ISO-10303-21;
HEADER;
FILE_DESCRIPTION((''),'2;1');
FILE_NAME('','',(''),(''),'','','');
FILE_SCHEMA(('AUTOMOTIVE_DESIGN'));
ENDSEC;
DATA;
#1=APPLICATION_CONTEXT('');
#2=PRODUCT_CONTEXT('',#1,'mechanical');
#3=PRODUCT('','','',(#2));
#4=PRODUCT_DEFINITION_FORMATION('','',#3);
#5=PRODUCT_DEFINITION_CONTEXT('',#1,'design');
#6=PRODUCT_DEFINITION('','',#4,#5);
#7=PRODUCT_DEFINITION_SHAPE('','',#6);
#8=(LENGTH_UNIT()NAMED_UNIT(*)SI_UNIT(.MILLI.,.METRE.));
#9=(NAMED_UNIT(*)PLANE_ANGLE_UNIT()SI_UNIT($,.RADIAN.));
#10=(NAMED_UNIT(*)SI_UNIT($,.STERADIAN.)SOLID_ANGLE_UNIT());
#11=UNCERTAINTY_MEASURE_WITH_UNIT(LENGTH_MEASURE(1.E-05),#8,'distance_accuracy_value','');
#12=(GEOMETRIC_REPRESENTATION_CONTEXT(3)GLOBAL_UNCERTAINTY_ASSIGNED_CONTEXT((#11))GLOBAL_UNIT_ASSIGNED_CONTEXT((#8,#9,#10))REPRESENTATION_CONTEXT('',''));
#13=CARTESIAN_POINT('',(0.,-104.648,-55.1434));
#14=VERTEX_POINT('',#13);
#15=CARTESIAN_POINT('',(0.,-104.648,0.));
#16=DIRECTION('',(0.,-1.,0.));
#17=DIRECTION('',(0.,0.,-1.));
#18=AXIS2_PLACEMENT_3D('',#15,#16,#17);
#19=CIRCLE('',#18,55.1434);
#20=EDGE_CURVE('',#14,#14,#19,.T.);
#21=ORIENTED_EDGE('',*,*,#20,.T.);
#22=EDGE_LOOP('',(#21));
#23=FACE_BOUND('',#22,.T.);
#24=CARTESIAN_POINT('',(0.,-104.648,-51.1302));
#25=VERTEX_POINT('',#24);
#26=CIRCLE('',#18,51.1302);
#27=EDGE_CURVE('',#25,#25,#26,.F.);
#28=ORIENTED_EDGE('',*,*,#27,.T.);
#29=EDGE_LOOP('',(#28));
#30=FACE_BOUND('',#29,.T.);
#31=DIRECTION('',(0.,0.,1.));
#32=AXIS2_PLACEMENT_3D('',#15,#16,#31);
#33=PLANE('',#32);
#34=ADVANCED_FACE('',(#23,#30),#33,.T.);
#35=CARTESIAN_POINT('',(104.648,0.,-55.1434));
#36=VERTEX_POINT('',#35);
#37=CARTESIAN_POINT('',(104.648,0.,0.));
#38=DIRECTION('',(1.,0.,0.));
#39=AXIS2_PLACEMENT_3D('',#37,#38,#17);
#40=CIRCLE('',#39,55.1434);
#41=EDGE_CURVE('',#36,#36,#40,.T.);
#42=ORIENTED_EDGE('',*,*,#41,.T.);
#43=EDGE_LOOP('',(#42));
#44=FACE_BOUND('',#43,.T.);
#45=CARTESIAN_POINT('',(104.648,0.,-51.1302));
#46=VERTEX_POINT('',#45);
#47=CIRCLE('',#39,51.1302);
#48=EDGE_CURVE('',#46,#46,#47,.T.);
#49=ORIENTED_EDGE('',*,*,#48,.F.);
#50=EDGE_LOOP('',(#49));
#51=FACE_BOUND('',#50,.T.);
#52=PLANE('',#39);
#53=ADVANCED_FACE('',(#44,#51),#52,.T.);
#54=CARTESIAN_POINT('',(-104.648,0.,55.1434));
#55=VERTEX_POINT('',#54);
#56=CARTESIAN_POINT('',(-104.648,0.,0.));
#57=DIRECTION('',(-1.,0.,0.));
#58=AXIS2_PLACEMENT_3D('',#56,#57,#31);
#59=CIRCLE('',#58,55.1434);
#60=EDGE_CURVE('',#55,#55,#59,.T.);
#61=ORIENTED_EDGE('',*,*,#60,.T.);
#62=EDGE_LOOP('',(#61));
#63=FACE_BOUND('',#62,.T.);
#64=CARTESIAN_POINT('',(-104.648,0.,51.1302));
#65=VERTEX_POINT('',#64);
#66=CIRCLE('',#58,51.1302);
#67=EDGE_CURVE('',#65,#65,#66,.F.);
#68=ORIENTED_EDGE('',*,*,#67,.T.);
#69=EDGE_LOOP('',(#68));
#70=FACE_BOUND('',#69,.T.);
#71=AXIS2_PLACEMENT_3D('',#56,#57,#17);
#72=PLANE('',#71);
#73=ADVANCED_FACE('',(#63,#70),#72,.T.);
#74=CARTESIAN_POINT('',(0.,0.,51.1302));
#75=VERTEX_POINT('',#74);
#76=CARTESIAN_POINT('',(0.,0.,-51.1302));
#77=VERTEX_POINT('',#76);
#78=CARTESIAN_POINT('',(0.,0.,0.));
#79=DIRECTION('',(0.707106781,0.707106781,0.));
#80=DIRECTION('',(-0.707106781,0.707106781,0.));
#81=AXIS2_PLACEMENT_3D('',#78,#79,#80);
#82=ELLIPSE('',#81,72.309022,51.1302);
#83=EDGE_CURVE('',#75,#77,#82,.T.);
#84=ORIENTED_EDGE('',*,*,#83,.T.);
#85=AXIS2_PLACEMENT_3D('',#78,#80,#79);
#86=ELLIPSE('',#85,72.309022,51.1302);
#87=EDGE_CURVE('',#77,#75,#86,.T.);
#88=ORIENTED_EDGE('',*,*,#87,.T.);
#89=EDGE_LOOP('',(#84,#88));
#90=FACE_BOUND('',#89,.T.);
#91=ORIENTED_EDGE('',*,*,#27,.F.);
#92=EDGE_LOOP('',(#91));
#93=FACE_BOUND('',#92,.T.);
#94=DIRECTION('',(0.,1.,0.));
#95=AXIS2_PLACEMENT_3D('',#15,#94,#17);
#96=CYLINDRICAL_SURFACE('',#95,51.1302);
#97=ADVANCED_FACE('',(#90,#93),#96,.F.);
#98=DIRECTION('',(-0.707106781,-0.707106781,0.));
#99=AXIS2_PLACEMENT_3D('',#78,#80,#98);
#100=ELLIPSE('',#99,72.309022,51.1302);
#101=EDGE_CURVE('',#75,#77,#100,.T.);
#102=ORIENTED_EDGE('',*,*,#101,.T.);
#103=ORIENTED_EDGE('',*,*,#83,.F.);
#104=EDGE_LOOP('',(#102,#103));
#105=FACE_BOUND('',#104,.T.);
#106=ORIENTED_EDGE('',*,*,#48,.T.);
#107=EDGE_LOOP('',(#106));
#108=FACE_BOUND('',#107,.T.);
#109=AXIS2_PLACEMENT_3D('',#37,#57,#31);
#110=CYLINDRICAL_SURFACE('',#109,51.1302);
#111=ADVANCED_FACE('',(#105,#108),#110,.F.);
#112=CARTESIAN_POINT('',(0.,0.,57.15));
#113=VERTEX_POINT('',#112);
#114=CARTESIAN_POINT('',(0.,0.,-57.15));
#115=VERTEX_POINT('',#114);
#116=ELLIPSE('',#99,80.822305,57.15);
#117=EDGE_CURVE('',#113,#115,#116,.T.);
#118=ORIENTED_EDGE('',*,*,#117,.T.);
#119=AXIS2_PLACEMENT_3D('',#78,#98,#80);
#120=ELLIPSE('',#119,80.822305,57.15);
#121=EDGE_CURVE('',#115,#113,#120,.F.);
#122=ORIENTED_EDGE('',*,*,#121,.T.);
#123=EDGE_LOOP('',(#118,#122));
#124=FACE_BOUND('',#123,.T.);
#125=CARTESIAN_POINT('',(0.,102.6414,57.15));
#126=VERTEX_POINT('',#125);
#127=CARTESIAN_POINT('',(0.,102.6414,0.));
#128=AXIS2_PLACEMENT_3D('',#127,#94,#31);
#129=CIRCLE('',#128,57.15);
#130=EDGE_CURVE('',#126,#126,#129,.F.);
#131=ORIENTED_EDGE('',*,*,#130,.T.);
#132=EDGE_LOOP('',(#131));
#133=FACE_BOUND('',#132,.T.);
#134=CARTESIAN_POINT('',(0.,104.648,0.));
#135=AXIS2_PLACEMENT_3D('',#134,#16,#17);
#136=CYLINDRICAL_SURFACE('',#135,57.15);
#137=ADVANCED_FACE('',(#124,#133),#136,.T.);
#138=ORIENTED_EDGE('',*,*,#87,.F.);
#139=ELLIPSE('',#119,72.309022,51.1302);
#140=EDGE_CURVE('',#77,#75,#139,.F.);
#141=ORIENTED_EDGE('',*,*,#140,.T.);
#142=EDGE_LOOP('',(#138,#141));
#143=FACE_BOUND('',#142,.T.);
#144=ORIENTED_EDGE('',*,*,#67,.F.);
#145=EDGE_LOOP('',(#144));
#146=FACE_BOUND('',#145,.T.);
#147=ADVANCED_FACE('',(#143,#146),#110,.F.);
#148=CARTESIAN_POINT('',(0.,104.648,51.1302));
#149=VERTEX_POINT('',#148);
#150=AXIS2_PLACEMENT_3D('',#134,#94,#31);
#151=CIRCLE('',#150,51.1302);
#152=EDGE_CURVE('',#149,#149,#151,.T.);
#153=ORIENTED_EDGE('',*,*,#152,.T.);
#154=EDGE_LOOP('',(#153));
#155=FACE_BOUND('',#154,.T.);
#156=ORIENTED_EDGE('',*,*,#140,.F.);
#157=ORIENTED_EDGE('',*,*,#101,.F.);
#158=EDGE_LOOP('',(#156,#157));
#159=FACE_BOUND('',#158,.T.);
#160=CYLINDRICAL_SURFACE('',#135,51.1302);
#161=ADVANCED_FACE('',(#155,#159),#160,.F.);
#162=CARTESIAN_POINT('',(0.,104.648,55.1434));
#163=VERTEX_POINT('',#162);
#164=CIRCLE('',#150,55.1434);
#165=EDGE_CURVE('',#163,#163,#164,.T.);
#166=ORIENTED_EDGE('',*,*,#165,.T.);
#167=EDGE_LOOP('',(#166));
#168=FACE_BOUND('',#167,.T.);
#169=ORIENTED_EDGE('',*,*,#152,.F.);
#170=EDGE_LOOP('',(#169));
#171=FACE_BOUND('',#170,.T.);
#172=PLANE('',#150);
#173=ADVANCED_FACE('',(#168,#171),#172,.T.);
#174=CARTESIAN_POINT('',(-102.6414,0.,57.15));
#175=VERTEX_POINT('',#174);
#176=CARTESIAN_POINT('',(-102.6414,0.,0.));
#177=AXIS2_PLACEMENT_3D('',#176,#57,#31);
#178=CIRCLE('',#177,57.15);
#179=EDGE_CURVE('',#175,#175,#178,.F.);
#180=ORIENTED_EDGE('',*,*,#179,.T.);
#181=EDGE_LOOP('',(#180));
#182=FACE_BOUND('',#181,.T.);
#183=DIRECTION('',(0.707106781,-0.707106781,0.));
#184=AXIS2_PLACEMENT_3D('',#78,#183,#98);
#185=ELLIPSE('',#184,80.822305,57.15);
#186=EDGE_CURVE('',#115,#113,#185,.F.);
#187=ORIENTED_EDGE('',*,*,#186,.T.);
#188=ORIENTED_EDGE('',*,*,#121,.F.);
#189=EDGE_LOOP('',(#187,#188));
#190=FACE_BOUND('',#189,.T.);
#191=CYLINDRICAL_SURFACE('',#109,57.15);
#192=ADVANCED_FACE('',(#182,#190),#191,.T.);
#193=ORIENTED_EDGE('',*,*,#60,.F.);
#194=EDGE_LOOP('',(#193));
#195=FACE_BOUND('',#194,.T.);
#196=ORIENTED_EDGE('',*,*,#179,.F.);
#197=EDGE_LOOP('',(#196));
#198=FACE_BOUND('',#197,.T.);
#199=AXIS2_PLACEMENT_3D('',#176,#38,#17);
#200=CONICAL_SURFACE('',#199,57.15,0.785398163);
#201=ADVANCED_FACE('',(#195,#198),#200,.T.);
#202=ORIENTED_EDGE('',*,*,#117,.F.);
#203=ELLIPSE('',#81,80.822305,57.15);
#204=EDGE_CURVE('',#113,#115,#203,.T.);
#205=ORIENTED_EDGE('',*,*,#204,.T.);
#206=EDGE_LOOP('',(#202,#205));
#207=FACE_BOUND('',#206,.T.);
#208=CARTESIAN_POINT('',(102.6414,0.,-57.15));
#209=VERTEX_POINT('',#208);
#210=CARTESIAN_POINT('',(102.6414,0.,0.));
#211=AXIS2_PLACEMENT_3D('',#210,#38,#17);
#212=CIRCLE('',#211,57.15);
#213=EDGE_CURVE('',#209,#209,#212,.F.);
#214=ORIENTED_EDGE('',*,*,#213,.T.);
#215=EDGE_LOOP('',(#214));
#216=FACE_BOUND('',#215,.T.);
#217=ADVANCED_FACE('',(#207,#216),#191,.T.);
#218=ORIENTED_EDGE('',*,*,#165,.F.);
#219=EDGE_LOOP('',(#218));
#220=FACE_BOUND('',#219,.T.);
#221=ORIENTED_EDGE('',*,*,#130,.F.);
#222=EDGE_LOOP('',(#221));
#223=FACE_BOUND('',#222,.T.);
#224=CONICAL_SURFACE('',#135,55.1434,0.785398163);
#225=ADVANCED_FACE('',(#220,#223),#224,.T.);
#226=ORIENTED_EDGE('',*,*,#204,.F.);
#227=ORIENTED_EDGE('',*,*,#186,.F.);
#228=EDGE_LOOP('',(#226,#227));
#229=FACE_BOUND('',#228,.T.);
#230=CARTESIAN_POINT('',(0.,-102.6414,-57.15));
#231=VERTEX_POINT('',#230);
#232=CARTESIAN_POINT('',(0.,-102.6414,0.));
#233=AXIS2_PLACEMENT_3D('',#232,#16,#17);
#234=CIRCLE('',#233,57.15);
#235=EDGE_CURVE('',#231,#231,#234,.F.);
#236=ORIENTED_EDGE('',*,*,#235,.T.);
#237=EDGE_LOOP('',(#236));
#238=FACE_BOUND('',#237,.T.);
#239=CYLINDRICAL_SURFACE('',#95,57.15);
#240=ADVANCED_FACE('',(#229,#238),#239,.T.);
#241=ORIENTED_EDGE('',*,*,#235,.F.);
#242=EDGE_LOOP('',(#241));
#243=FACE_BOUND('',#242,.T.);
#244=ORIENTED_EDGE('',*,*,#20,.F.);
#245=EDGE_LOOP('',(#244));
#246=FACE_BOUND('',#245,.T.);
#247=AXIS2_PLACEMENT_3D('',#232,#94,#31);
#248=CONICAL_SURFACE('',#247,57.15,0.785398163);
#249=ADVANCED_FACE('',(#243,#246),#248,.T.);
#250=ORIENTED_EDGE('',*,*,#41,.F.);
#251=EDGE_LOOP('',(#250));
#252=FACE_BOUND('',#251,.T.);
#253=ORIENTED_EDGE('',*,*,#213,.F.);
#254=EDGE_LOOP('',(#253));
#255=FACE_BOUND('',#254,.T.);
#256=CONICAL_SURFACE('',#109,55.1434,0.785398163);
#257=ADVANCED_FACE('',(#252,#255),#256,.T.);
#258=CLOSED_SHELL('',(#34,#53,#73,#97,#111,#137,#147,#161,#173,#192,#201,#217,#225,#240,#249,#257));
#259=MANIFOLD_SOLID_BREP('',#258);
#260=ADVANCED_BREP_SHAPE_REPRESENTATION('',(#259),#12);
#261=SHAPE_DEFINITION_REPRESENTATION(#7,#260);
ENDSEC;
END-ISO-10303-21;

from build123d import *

# Parameters (mm, degrees)
RUNROUTE_R             = 57.15
RUNEXTRUDE_DEPTH       = 104.648
OUTLETROUTE_R          = 57.15
OUTLETEXTRUDE_DEPTH    = 104.648
CROSSSHELL_START       = -104.648
CROSSSHELL_OUTLINE_R   = 51.1302
CROSSSHELL_DEPTH       = 209.296
CROSSSHELL_2_OUTLINE_R = 51.1302
CROSSSHELL_2_DEPTH     = 209.296
CROSSCHAMFER_SIZE      = 2.0066


with BuildPart() as part:
    # RunRoute → RunExtrude (new body)
    with BuildSketch(Plane(origin=(0, 0, 0), x_dir=(0, 0, -1), z_dir=(1, 0, 0))):
        Circle(RUNROUTE_R)
    runextrude = extrude(amount=RUNEXTRUDE_DEPTH)

    # RunExtrudeMirror: RunExtrude across plane
    add(runextrude.mirror(Plane(origin=(0, 0, 0), x_dir=(0, 0, 1), z_dir=(1, 0, 0))))

    # OutletRoute → OutletExtrude (add)
    with BuildSketch(Plane(origin=(0, 0, 0), x_dir=(1, 0, 0), z_dir=(0, 1, 0))):
        with Locations(Location((0, 0, 0), (0, 0, 270))):
            Circle(OUTLETROUTE_R)
    outletextrude = extrude(amount=OUTLETEXTRUDE_DEPTH)

    # OutletExtrudeMirror: OutletExtrude across plane
    add(outletextrude.mirror(Plane.ZX))

    # CrossShell: read off the stored shape, not the designer's step
    # CrossShell outline → CrossShell (cut)
    with BuildSketch(Plane.YZ.offset(CROSSSHELL_START)):
        Circle(CROSSSHELL_OUTLINE_R)
    extrude(amount=CROSSSHELL_DEPTH, mode=Mode.SUBTRACT)

    # CrossShell 2 outline → CrossShell 2 (cut)
    with BuildSketch(Plane(origin=(0, 0, 0), x_dir=(1, 0, 0), z_dir=(0, 1, 0)).offset(CROSSSHELL_START)):
        Circle(CROSSSHELL_2_OUTLINE_R)
    extrude(amount=CROSSSHELL_2_DEPTH, mode=Mode.SUBTRACT)

    # CrossChamfer
    crosschamfer_edges = [part.edges().sort_by_distance(p)[0] for p in [
        (0, -104.648, -57.15),
        (104.648, 0, 57.15),
        (-104.648, 0, 57.15),
        (0, 104.648, -57.15),
    ]]
    chamfer(crosschamfer_edges, length=CROSSCHAMFER_SIZE)


solid = part.part
